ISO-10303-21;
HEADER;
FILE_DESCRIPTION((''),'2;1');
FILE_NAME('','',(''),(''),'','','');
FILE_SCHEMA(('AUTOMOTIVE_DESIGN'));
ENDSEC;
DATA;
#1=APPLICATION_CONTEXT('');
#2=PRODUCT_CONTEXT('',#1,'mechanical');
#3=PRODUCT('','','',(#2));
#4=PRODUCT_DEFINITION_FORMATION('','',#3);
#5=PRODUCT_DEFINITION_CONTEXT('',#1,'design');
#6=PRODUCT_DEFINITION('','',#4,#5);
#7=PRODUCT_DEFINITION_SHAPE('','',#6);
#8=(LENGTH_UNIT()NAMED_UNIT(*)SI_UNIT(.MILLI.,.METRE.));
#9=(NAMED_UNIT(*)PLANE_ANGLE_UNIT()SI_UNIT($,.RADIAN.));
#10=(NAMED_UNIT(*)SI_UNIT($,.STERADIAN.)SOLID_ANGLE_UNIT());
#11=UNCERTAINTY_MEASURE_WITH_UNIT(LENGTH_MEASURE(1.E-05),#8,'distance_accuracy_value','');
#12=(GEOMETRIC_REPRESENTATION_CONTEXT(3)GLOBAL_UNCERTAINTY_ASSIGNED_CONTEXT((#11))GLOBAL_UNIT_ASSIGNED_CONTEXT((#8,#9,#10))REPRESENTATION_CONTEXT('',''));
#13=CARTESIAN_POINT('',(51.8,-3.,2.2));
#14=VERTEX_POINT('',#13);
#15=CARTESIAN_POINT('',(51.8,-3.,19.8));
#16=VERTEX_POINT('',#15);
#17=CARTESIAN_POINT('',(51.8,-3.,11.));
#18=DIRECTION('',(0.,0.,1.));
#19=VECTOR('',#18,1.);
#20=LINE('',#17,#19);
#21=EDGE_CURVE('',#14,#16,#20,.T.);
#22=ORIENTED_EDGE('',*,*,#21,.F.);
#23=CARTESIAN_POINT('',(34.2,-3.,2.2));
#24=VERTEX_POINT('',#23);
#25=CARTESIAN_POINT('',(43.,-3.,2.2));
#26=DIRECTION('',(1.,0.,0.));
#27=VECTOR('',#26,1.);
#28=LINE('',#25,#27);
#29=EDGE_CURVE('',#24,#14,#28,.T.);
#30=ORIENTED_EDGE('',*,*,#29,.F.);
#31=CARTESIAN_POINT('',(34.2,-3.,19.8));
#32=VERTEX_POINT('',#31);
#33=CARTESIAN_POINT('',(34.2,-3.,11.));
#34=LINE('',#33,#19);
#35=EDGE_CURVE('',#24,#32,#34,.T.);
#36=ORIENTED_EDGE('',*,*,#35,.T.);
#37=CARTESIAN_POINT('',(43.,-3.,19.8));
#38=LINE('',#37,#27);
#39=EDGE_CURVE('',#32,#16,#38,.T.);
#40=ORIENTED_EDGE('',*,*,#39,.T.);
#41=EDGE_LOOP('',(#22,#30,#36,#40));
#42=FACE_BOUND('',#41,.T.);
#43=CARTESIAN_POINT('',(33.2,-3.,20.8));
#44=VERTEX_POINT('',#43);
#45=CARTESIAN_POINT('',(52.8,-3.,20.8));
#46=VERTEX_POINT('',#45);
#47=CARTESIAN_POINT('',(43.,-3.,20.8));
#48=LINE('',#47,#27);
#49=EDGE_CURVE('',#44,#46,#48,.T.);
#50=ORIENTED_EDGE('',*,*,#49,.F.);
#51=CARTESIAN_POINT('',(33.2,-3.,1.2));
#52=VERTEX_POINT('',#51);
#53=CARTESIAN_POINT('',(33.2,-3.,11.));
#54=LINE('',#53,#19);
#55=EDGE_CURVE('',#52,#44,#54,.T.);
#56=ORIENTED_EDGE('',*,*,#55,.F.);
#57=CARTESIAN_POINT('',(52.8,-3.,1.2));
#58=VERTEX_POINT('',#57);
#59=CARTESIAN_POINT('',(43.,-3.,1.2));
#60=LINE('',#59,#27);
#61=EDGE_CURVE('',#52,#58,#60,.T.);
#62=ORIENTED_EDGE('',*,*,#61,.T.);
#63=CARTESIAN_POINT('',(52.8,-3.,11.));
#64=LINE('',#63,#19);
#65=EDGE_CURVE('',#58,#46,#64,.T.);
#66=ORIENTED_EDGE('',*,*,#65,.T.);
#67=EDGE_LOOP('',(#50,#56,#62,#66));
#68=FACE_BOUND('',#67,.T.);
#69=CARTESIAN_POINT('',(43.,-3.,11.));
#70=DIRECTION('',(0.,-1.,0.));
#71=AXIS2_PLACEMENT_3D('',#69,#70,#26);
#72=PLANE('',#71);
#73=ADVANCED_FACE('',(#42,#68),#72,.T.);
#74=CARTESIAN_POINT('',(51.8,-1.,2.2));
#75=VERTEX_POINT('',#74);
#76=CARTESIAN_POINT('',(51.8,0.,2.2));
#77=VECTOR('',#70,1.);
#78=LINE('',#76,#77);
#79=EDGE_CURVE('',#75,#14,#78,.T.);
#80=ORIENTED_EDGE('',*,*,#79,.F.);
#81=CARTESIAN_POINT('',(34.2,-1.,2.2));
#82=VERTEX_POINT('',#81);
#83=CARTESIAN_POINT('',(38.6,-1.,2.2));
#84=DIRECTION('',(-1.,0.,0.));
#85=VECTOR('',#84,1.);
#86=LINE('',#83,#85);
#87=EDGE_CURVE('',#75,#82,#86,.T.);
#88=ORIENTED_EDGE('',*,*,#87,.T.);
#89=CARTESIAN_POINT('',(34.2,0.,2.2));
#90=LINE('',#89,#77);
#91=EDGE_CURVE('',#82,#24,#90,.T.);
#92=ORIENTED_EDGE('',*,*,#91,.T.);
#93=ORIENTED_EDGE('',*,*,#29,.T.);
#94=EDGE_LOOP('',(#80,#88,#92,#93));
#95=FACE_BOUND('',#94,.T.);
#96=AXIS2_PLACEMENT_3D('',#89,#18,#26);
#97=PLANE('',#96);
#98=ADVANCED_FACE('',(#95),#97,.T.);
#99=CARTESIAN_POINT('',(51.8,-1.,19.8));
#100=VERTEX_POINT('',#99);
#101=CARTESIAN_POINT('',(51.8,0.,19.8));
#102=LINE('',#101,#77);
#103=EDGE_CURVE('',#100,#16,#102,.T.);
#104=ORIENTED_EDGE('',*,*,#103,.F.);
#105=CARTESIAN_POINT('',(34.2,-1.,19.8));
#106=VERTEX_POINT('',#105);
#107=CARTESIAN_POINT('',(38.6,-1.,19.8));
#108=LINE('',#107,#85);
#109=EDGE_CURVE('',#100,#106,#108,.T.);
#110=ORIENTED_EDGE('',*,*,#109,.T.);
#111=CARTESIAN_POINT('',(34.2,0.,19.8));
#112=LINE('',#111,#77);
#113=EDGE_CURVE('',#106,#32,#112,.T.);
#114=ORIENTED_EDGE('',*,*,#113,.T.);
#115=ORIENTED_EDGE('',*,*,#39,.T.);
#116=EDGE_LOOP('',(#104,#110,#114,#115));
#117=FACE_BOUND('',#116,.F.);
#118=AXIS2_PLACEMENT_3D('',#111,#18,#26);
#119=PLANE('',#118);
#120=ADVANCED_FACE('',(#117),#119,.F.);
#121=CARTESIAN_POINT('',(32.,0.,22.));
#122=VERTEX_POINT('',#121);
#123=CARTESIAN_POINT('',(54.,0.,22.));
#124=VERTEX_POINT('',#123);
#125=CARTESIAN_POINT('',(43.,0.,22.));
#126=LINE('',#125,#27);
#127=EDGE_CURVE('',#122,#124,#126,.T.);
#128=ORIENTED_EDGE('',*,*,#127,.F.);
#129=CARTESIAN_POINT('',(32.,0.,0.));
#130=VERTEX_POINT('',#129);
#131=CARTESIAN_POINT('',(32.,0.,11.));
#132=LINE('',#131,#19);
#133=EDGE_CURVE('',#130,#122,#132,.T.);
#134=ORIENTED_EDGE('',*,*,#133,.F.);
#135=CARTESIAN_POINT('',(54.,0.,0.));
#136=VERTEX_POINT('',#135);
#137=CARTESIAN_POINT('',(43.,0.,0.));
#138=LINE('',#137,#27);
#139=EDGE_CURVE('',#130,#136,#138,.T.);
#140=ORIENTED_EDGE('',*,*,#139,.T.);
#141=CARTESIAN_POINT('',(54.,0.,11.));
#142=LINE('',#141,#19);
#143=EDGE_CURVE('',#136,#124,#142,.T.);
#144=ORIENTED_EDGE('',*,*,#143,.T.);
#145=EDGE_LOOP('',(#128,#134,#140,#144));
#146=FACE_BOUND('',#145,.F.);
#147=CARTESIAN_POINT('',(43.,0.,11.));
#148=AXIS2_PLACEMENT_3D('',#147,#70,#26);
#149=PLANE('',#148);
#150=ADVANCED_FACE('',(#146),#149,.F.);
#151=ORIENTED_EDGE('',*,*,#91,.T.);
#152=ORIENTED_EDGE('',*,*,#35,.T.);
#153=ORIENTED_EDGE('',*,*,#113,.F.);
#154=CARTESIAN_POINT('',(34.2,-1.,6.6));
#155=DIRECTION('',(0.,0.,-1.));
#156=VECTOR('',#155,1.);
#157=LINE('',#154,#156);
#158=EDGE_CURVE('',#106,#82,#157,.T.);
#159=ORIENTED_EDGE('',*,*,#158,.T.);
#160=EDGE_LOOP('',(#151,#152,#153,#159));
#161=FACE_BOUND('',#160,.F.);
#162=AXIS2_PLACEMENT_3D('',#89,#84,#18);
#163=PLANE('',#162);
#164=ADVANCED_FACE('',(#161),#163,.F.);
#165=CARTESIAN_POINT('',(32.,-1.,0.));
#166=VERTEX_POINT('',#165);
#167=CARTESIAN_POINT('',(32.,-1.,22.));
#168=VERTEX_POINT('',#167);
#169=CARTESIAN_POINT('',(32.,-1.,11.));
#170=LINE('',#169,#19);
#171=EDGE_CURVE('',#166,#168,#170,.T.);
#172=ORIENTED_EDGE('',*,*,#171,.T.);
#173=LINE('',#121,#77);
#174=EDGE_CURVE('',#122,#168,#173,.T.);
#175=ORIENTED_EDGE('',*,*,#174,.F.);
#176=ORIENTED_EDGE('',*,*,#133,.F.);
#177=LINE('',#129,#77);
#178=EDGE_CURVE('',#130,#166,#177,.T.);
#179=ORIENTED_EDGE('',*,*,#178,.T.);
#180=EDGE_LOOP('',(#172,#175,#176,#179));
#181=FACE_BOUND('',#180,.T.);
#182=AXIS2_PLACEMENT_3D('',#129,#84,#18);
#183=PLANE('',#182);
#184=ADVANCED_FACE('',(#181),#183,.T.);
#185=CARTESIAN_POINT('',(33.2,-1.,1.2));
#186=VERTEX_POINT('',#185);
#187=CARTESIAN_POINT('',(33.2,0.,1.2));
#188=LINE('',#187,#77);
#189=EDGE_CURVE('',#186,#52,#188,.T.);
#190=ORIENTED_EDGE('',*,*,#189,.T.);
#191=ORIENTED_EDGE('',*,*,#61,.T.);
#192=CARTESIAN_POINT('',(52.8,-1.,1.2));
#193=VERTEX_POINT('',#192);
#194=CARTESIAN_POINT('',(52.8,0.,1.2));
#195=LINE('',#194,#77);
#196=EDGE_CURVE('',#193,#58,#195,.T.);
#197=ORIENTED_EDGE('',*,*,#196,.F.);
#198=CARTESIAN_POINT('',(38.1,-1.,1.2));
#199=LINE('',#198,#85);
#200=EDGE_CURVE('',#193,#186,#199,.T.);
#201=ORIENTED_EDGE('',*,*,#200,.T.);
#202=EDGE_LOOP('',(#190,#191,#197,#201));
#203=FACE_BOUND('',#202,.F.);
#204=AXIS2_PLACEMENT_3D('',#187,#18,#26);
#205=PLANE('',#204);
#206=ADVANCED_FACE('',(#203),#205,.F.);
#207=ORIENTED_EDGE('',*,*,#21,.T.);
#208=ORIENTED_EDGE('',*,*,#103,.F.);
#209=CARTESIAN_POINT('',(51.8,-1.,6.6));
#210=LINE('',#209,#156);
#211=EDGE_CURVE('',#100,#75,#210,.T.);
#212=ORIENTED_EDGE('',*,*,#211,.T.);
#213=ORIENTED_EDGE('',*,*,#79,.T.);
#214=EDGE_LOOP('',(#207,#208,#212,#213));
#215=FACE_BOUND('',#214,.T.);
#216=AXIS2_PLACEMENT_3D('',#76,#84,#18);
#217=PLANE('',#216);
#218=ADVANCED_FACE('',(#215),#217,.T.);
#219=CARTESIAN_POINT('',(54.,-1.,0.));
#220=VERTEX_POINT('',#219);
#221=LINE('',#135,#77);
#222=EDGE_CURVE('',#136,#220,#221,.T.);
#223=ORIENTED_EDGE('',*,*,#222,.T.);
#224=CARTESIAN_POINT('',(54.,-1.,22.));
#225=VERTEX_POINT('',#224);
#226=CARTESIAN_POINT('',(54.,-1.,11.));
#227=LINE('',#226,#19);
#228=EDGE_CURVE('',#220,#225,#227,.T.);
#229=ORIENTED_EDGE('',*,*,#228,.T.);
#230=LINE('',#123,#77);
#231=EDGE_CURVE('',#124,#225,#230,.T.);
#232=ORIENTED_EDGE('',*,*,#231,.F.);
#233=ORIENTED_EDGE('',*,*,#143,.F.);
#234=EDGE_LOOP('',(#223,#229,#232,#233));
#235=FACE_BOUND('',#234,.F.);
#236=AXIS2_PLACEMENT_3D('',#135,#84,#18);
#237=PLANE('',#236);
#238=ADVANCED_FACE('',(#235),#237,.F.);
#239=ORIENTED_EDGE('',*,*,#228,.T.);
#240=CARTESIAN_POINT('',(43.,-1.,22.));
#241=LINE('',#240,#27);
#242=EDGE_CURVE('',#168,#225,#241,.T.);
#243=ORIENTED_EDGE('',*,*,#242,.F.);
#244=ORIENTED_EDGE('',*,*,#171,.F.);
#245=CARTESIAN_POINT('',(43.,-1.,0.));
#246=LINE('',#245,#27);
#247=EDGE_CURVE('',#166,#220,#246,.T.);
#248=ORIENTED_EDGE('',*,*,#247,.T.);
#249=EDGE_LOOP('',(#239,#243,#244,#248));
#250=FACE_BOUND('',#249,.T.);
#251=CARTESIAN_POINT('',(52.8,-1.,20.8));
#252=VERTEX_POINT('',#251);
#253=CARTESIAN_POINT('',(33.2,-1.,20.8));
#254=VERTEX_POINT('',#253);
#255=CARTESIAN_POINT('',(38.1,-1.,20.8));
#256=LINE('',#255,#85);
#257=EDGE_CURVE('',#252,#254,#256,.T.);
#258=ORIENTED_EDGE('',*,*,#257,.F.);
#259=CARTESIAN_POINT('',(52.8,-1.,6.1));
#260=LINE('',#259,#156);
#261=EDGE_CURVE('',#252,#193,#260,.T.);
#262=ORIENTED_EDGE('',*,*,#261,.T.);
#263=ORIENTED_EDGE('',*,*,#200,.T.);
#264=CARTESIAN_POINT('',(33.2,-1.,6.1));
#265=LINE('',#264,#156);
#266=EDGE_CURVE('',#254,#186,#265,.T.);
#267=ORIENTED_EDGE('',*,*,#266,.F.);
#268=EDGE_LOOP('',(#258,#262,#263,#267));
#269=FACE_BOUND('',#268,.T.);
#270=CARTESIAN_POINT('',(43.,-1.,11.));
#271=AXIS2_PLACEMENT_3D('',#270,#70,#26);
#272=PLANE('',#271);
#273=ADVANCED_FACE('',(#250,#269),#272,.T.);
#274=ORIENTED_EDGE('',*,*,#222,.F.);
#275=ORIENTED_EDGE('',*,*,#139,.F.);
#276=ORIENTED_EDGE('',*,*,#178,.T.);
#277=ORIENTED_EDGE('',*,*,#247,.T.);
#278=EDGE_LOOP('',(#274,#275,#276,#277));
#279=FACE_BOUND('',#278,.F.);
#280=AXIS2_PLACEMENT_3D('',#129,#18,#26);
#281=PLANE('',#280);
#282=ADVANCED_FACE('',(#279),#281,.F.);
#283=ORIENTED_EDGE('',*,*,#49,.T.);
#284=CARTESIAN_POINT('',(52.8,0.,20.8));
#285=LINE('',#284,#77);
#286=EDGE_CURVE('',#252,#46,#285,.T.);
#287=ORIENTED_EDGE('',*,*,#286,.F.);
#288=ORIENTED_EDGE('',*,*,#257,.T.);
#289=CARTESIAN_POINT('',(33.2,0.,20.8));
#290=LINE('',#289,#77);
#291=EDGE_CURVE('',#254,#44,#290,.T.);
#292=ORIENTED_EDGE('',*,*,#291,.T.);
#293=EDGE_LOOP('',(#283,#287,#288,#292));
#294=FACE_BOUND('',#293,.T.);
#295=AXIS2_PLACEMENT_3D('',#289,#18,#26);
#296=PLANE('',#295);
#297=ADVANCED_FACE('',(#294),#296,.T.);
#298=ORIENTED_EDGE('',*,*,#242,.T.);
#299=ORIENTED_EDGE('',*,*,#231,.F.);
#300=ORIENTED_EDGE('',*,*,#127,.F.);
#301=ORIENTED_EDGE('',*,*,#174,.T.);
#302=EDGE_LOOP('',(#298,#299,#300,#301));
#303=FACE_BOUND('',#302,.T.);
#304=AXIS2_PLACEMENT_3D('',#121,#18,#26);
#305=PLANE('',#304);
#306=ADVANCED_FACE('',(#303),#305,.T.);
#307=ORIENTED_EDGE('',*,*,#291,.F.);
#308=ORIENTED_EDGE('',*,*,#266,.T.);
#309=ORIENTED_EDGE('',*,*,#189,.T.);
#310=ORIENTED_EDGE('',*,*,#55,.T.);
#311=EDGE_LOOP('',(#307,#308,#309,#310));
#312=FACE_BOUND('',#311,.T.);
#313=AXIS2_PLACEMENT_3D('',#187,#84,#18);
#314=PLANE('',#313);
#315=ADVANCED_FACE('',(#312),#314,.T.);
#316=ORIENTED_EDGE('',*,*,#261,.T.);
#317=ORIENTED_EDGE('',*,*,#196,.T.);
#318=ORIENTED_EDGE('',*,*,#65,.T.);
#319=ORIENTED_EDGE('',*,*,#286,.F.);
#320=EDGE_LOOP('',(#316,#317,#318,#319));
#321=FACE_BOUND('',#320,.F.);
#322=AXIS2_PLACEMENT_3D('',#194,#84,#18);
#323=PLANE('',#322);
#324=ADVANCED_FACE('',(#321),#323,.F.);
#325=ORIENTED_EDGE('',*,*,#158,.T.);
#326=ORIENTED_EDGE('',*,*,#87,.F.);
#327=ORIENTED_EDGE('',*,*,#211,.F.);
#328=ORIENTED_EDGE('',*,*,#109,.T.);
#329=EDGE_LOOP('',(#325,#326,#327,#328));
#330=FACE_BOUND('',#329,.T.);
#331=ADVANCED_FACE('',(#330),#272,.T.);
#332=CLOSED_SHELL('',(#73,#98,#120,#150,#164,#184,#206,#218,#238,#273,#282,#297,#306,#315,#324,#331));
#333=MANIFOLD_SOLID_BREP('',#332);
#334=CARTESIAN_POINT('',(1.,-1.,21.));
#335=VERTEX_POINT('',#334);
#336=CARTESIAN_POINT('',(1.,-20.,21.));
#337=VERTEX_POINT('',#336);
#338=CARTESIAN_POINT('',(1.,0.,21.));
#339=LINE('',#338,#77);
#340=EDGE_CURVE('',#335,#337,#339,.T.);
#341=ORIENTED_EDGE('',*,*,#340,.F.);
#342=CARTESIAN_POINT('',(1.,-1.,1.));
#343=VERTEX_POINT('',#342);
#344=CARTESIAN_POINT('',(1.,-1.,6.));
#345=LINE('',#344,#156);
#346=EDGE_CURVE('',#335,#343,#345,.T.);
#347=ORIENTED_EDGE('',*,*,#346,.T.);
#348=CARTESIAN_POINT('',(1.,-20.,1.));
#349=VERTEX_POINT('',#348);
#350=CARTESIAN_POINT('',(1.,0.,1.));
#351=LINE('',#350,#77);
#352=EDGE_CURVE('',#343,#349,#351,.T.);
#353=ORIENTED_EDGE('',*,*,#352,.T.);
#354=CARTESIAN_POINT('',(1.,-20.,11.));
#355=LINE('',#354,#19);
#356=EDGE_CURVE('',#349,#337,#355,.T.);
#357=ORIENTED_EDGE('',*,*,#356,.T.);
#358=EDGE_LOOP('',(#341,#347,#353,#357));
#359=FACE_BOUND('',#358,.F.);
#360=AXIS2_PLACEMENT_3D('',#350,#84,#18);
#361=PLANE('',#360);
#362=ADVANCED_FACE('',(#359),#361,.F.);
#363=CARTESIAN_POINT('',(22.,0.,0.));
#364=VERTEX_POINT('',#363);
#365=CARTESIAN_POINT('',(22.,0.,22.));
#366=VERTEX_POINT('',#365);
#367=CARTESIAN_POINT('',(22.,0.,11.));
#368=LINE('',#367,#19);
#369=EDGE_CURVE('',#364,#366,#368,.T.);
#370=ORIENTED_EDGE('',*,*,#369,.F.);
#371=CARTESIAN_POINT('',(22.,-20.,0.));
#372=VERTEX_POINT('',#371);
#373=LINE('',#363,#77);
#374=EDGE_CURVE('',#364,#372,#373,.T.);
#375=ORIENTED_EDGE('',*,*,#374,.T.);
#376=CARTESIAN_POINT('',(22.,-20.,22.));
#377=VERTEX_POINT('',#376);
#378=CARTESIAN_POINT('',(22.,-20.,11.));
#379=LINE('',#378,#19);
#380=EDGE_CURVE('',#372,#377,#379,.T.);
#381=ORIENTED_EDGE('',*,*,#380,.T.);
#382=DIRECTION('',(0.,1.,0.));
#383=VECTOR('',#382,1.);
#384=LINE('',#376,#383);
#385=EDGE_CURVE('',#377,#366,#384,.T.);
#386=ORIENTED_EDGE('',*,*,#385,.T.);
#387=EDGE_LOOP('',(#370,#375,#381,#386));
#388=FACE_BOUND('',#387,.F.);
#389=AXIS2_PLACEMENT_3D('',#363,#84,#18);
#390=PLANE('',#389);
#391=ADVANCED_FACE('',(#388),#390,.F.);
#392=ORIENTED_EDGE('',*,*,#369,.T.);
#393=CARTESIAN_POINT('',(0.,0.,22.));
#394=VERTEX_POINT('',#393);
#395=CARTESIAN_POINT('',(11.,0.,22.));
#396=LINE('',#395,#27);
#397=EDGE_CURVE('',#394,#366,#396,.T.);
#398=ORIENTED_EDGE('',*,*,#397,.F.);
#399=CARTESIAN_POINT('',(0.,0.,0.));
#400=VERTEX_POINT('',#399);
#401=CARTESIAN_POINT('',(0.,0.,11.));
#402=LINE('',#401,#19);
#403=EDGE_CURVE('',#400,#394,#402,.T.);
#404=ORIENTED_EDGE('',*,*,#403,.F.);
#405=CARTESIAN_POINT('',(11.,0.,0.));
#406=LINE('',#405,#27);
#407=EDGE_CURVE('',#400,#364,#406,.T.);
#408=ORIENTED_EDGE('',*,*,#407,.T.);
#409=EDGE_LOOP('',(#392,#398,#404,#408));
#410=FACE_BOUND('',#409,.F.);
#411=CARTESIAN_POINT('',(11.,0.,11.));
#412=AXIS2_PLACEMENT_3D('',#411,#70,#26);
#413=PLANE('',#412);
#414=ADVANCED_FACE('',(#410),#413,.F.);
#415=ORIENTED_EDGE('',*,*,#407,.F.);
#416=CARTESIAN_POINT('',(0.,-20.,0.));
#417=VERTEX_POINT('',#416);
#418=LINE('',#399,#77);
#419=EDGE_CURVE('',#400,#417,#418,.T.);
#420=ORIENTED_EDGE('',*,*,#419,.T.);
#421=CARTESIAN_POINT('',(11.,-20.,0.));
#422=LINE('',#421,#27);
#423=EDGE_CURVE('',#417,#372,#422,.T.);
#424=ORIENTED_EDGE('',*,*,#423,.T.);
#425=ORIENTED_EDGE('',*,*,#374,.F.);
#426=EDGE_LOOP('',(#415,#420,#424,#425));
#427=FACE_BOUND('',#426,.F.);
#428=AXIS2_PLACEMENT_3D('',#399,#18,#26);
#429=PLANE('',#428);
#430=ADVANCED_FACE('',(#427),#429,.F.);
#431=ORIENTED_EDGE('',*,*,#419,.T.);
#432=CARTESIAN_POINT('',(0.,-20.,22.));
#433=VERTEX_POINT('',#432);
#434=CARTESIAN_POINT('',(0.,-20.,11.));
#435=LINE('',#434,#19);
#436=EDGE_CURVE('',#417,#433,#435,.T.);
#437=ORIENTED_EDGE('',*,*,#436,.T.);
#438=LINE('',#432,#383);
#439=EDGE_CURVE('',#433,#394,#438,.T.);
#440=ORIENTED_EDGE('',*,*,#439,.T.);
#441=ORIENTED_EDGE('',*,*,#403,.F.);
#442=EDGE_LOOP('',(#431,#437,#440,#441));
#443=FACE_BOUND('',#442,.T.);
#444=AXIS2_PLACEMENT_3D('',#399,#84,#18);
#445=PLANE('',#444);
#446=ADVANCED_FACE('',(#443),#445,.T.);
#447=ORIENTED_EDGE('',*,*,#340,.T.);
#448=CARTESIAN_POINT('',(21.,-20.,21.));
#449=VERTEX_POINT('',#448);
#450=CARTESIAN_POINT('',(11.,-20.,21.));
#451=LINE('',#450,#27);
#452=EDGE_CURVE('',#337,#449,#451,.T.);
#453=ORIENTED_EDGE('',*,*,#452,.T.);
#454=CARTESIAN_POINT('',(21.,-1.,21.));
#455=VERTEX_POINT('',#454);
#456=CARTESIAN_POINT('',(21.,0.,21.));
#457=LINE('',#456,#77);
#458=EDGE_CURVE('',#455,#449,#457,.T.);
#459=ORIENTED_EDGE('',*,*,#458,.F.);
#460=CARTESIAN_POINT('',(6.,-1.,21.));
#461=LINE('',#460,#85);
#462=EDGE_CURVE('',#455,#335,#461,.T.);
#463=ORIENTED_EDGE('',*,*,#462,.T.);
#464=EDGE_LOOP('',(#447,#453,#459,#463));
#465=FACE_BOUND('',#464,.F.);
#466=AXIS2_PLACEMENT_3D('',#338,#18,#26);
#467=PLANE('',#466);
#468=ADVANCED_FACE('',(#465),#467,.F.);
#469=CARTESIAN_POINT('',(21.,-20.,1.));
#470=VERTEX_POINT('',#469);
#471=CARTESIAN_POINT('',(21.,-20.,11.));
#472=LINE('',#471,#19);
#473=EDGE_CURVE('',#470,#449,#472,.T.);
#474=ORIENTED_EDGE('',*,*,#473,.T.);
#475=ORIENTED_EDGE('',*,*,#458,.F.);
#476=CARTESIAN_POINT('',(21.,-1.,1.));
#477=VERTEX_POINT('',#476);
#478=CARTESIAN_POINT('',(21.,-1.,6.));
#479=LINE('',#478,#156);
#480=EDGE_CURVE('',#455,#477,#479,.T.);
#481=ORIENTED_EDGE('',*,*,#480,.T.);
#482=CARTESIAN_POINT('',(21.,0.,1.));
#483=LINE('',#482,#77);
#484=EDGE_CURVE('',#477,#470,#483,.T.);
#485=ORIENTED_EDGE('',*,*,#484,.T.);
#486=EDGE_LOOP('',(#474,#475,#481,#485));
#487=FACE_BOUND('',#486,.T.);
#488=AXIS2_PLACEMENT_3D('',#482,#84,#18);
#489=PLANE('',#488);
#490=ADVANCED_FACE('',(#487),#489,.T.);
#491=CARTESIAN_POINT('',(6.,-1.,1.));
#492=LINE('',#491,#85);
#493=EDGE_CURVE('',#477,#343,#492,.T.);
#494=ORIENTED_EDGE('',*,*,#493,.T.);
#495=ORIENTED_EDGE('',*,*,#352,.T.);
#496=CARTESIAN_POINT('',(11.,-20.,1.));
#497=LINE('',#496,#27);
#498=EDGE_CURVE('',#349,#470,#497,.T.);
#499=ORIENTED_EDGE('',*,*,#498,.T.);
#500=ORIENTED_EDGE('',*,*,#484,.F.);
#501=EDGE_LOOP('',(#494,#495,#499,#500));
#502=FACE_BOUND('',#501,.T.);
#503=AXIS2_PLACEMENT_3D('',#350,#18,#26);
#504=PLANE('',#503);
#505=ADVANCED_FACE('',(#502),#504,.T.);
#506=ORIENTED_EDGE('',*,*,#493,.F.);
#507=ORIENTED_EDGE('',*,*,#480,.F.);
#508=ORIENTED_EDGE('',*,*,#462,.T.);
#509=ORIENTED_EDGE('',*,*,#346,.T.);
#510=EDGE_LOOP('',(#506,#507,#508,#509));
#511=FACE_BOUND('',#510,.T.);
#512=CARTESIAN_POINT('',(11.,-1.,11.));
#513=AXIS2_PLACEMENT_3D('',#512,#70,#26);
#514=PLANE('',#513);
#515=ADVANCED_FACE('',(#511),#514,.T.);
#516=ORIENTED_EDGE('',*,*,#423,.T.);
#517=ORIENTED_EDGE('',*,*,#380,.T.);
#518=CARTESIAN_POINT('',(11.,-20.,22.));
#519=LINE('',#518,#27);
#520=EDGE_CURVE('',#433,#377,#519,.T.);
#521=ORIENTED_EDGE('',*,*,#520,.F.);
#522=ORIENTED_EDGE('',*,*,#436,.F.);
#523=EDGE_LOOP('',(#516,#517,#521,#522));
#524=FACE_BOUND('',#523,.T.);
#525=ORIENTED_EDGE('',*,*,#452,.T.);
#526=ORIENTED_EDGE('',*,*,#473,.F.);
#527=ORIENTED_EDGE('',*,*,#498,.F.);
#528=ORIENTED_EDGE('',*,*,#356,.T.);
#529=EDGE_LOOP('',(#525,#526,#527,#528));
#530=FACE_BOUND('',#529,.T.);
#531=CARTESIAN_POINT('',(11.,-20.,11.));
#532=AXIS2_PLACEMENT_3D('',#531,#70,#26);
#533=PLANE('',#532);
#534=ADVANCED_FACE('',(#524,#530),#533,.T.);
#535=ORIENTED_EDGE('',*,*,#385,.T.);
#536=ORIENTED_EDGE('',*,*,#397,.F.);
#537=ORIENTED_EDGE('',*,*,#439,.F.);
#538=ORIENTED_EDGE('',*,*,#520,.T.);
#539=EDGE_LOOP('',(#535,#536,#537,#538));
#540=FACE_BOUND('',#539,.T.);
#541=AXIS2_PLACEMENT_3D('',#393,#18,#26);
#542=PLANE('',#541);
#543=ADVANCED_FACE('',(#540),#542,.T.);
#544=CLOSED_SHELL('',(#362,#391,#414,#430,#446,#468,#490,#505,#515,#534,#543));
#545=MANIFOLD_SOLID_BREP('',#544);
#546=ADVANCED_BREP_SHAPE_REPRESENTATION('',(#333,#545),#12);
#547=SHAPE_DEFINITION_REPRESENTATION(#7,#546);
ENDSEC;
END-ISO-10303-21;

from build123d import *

# Parameters (mm, degrees)
F0_W     = 22
F0_H     = 22
F0_W_2   = 20
F0_H_2   = 20
F1_DEPTH = 1
F0_W_3   = 19.6
F0_H_3   = 19.6
F0_W_4   = 17.6
F0_H_4   = 17.6
F2_DEPTH = 20
F3_DEPTH = 3


with BuildPart() as f1:
    # F0 (on Front) → F1 (new body)
    with BuildSketch(Plane.XZ):
        with Locations((11, 11)):
            Rectangle(F0_W, F0_H)
        with Locations((11, 11)):
            Rectangle(F0_W_2, F0_H_2, mode=Mode.SUBTRACT)
        with Locations((11, 11)):
            Rectangle(F0_W_2, F0_H_2)
    extrude(amount=F1_DEPTH)

    # F0 (on Front) → F2 (join)
    with BuildSketch(Plane.XZ):
        with Locations((11, 11)):
            Rectangle(F0_W, F0_H)
        with Locations((11, 11)):
            Rectangle(F0_W_2, F0_H_2, mode=Mode.SUBTRACT)
    extrude(amount=F2_DEPTH)


with BuildPart() as f1b:
    # F0 (on Front) → F1, piece 2 (new body)
    with BuildSketch(Plane.XZ):
        with Locations((43, 11)):
            Rectangle(F0_W, F0_H)
        with Locations((43, 11)):
            Rectangle(F0_W_3, F0_H_3, mode=Mode.SUBTRACT)
        with Locations((43, 11)):
            Rectangle(F0_W_3, F0_H_3)
        with Locations((43, 11)):
            Rectangle(F0_W_4, F0_H_4, mode=Mode.SUBTRACT)
        with Locations((43, 11)):
            Rectangle(F0_W_4, F0_H_4)
    extrude(amount=F1_DEPTH)

    # F0 (on Front) → F3 (join)
    with BuildSketch(Plane.XZ):
        with Locations((43, 11)):
            Rectangle(F0_W_3, F0_H_3)
        with Locations((43, 11)):
            Rectangle(F0_W_4, F0_H_4, mode=Mode.SUBTRACT)
    extrude(amount=F3_DEPTH)


solid = Compound([f1.part, f1b.part])
